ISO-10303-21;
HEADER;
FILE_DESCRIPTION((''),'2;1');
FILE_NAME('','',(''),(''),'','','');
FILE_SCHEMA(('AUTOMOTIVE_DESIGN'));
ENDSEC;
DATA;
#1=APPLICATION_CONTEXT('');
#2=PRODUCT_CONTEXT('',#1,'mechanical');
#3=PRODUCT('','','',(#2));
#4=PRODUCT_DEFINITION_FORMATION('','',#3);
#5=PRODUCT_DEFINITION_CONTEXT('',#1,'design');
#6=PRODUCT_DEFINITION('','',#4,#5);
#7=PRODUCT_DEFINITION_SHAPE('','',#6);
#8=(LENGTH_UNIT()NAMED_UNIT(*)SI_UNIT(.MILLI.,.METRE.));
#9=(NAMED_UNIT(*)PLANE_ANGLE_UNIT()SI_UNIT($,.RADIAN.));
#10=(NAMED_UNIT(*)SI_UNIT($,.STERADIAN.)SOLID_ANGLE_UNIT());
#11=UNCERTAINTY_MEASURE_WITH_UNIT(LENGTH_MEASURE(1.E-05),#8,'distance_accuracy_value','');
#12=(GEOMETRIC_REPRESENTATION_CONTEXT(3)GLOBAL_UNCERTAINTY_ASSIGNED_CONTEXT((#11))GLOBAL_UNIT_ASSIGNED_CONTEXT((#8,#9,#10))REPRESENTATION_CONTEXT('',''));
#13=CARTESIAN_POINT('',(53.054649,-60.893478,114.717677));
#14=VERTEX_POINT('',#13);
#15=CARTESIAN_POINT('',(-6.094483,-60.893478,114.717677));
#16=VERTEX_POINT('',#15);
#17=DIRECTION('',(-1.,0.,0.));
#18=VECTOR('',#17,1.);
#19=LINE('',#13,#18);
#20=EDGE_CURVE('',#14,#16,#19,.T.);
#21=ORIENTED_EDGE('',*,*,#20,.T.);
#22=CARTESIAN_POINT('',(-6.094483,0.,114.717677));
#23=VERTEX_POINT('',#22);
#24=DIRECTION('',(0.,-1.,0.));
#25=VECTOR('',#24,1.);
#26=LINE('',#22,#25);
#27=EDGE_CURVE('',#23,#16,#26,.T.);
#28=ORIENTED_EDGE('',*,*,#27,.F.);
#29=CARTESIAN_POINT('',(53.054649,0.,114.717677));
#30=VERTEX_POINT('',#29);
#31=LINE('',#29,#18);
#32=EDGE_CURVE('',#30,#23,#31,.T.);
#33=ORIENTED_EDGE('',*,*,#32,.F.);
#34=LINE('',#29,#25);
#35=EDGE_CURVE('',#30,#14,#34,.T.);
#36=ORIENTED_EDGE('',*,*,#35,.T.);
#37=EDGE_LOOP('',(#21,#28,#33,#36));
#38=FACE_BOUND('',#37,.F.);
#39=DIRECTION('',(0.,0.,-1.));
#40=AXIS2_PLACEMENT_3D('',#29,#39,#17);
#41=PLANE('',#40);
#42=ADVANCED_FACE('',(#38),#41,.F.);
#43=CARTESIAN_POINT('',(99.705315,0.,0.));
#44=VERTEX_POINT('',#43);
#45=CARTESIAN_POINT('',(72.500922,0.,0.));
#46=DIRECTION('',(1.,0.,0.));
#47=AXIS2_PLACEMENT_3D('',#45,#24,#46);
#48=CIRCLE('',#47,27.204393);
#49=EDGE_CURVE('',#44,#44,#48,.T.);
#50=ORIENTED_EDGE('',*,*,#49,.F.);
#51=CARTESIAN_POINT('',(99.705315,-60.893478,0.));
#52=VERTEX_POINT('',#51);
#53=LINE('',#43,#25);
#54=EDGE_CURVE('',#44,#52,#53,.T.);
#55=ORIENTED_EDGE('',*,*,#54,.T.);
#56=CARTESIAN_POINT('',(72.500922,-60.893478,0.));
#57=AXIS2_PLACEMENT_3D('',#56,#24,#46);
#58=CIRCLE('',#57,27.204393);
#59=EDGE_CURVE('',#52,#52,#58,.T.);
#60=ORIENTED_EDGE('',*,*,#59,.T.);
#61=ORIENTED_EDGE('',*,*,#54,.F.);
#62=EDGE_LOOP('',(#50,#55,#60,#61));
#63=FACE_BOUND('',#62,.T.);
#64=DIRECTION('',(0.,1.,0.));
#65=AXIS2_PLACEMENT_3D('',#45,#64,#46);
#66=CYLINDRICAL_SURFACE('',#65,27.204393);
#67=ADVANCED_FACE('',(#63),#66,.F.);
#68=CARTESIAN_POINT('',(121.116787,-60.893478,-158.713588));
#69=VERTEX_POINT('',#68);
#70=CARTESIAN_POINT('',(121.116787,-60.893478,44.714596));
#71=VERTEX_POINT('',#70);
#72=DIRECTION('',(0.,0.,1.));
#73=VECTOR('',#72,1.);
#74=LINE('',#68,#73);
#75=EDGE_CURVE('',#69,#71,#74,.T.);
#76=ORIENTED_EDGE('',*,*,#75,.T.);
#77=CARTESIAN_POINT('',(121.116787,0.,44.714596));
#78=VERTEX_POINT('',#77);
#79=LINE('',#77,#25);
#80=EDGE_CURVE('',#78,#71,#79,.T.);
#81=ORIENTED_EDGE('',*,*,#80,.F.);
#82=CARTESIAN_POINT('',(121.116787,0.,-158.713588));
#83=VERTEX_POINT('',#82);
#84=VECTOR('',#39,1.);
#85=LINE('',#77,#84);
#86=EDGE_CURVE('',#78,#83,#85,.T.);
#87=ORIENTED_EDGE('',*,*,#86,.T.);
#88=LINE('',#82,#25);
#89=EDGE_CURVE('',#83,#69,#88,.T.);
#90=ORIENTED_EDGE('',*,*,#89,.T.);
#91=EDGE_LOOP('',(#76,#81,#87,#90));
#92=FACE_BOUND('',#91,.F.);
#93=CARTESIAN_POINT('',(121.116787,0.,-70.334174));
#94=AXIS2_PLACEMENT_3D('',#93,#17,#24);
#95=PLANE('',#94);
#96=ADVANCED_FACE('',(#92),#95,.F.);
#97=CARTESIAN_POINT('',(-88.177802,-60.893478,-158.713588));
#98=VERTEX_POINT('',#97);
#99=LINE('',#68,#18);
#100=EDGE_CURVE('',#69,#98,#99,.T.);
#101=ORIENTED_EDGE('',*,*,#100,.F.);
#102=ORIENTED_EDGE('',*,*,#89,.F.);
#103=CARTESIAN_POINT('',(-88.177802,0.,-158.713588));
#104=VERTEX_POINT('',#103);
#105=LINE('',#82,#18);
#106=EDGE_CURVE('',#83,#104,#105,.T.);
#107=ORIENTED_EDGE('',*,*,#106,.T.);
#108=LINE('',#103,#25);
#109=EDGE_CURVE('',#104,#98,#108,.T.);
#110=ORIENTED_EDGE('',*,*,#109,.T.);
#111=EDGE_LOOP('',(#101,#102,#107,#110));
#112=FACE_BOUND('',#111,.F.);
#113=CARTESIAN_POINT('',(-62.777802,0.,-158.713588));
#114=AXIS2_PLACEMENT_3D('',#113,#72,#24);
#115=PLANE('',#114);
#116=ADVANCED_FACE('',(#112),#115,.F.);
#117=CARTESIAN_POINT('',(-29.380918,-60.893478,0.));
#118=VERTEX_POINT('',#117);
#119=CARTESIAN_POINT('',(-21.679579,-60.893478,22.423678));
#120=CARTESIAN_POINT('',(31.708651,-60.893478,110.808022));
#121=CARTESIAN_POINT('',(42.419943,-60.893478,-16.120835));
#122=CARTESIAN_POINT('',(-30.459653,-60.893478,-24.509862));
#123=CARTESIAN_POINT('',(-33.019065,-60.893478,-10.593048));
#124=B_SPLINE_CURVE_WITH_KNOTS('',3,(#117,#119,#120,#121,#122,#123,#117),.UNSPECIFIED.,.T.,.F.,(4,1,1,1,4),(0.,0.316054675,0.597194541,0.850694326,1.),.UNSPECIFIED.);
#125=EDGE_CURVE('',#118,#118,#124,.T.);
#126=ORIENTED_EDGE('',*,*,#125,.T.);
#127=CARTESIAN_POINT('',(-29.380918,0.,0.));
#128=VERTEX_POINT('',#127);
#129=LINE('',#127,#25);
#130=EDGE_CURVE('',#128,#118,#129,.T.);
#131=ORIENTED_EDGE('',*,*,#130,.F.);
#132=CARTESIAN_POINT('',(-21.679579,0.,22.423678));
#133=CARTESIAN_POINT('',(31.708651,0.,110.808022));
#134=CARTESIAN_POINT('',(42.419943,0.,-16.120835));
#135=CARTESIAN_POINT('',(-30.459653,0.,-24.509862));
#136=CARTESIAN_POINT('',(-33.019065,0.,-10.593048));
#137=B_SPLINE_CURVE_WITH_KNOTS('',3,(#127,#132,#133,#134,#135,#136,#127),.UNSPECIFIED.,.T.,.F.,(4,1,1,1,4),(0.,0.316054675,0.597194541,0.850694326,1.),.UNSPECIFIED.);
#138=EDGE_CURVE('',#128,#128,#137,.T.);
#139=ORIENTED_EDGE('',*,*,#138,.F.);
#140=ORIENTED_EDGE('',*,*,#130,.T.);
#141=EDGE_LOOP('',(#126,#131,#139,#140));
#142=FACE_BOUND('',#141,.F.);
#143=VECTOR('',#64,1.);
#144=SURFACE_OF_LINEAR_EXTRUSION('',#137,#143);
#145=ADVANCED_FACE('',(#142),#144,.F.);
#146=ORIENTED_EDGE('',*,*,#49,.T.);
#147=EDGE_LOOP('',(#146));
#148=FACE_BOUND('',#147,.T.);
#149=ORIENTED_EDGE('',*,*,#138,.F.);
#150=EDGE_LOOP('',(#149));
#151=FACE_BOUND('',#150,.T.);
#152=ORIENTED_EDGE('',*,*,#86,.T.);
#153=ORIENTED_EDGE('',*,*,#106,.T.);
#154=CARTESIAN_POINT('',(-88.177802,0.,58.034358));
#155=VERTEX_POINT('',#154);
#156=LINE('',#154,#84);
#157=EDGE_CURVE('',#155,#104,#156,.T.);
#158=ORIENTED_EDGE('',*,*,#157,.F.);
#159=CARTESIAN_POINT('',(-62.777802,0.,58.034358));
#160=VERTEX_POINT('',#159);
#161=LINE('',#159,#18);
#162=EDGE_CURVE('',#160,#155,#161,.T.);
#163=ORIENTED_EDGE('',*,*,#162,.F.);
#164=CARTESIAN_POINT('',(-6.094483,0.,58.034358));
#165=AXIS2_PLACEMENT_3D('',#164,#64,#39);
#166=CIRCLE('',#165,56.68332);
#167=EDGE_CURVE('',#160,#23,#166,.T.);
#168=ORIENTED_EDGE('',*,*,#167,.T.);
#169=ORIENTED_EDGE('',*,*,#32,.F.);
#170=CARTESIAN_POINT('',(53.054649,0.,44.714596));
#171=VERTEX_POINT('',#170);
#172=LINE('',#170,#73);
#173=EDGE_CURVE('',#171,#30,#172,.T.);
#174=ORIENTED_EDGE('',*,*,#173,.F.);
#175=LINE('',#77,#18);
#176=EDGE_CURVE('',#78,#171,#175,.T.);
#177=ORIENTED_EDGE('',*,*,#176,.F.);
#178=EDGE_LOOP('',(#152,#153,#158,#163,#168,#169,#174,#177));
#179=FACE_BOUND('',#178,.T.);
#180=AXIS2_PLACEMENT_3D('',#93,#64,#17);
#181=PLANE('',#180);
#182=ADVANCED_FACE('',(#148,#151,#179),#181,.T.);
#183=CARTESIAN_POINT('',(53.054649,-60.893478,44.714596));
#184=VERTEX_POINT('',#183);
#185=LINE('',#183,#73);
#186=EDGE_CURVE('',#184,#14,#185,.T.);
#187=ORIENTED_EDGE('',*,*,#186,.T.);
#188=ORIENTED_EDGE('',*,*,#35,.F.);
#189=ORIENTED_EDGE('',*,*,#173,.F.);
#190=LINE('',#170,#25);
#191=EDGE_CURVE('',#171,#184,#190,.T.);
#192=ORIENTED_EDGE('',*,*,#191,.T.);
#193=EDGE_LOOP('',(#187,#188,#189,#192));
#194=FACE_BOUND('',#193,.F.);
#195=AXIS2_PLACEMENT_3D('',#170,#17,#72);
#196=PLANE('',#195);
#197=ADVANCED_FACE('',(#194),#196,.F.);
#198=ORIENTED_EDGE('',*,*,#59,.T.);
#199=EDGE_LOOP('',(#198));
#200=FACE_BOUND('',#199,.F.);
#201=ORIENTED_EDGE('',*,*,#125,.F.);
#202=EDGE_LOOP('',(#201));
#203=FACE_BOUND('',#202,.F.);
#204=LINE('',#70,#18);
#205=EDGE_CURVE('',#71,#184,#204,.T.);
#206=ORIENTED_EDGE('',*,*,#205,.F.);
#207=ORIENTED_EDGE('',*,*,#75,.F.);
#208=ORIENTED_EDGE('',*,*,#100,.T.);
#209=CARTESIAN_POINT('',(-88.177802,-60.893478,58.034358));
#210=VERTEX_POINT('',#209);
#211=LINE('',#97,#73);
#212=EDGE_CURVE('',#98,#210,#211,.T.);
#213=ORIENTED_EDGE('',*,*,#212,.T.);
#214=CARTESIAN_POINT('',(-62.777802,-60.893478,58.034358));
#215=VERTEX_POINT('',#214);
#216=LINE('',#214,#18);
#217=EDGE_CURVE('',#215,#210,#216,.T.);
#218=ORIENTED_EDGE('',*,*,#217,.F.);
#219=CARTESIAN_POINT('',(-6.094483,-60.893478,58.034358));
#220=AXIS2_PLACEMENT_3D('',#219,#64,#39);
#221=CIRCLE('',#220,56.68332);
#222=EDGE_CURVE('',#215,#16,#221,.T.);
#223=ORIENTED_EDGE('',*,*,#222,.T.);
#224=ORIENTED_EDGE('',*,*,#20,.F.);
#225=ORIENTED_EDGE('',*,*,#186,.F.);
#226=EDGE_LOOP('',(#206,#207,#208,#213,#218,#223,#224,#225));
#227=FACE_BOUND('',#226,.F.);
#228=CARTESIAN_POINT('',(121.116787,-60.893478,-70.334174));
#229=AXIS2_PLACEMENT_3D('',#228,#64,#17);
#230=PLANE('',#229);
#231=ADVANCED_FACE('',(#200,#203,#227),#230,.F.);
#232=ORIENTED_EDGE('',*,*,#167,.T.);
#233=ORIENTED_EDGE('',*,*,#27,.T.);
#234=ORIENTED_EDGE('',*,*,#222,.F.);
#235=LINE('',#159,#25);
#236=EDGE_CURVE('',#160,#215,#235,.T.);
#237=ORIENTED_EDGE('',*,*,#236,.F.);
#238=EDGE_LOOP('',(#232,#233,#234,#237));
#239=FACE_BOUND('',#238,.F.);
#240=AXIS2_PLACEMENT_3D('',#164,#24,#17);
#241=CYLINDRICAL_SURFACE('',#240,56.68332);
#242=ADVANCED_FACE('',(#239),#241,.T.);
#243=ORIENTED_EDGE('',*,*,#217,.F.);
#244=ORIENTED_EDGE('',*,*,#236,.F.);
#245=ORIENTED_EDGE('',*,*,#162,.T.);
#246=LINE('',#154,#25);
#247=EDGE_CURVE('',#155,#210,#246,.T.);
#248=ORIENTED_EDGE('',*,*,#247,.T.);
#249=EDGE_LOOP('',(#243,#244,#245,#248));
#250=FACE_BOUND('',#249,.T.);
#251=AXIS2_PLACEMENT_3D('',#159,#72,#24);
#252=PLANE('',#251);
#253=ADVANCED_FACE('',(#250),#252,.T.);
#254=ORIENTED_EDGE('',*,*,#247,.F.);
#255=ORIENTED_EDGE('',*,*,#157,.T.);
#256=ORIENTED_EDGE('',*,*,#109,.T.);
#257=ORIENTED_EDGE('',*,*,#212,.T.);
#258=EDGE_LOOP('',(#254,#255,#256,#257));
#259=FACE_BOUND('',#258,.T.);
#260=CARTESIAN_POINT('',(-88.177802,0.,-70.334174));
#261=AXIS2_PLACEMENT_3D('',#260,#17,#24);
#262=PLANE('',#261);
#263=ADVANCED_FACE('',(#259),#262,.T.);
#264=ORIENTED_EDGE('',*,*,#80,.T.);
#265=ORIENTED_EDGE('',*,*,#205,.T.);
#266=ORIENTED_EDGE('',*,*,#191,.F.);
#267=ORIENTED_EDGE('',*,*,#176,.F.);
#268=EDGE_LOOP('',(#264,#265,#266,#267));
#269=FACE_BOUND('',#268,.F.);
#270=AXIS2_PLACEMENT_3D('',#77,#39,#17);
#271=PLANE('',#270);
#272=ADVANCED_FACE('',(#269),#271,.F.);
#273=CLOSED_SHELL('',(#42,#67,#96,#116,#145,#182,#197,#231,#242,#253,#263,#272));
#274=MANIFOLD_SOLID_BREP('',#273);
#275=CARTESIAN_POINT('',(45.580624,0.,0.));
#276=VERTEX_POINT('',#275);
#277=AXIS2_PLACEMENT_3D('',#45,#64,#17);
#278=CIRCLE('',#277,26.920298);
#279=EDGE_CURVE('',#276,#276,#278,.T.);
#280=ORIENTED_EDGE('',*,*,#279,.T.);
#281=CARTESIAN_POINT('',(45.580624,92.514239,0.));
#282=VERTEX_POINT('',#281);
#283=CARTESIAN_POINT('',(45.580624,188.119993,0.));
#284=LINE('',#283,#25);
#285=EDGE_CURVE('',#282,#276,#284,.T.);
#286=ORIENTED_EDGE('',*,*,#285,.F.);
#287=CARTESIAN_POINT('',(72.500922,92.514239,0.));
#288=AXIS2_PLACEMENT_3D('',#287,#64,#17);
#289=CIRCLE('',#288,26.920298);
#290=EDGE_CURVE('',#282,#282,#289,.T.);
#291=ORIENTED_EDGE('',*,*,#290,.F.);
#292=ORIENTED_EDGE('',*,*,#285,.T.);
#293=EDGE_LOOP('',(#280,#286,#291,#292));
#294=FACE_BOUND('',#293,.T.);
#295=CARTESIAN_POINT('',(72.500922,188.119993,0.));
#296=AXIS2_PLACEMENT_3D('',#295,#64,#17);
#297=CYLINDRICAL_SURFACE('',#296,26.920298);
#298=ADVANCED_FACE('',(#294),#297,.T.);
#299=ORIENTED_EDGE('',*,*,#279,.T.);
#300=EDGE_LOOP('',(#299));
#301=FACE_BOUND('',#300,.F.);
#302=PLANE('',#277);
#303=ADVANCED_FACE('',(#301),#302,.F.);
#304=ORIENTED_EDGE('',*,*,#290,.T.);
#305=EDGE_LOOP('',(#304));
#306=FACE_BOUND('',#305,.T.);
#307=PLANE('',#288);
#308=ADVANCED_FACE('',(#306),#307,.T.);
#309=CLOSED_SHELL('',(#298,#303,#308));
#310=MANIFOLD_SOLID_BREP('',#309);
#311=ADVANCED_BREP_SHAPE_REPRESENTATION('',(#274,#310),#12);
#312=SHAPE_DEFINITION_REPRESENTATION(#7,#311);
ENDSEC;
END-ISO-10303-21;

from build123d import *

# Parameters (mm, degrees)
F0_R      = 27.2043930804
F1_DEPTH  = 60.893477872
F2_R      = 56.6833195886
F3_R      = 26.9202980766
F4_DEPTH  = 188.1199926138
F5_DEPTH  = 143.7802445143
F8_DEPTH  = 25.4
F9_DEPTH  = 88.3794147521
F10_DEPTH = 95.6057533622


# Not quite as in the source:
# - a feature of the source that left no trace in its solid (it failed there, or was rolled back) is left out


with BuildPart() as f1:
    # F0 (on Front) → F1 (new body)
    with BuildSketch(Plane.XZ):
        Polygon((-62.7778023481, 114.7176772356), (-62.7778023481, -70.334173739), (121.1167871952, -70.334173739), (121.1167871952, 44.7145961225), (53.0546493828, 44.7145961225), (53.0546493828, 114.7176772356), align=None)
        with Locations((72.5009217858, 0)):
            Circle(F0_R, mode=Mode.SUBTRACT)
        with BuildLine():
            add(Edge.make_bspline(
                [(-29.3809175491, 0), (-21.679578827, 22.4236781976), (31.7086513943, 110.8080219924), (42.4199428526, -16.1208348012), (-30.4596532938, -24.5098615886), (-33.0190651742, -10.5930481079), (-29.3809175491, 0)],
                knots=[0, 0, 0, 0, 0.3160546751, 0.5971945413, 0.8506943264, 1, 1, 1, 1], degree=3))
        make_face(mode=Mode.SUBTRACT)
    extrude(amount=F1_DEPTH)

    # F2
    f2_edges = [f1.edges().sort_by_distance(p)[0] for p in [
        (-62.777802, -30.446739, 114.717677),
    ]]
    fillet(f2_edges, radius=F2_R)

    # F8 (add): a face of the model
    f8_faces = [f1.faces().sort_by_distance(p)[0] for p in [
        (-62.7778023481, -30.446738936, -6.149908046),
    ]]
    extrude(f8_faces, amount=F8_DEPTH)

    # F9 (add): a face of the model
    f9_faces = [f1.faces().sort_by_distance(p)[0] for p in [
        (16.4694924235, -30.446738936, -70.334173739),
    ]]
    extrude(f9_faces, amount=F9_DEPTH)


with BuildPart() as f4:
    # F3 (on face) → F4 (new body)
    with BuildSketch(Plane(origin=(0, 0, 0), x_dir=(-1, 0, 0), z_dir=(0, 1, 0))):
        with Locations((-72.5009217858, 0)):
            Circle(F3_R)
    extrude(amount=F4_DEPTH)

    # F5 (add): a face of the model
    f5_faces = [f4.faces().sort_by_distance(p)[0] for p in [
        (72.5009217858, 188.1199926138, 0),
    ]]
    extrude(f5_faces, amount=-F5_DEPTH)

    # F10 (cut): a face of the model
    f10_faces = [f4.faces().sort_by_distance(p)[0] for p in [
        (72.5009217858, 188.1199926138, 0),
    ]]
    extrude(f10_faces, amount=-F10_DEPTH, mode=Mode.SUBTRACT)


solid = Compound([f1.part, f4.part])
